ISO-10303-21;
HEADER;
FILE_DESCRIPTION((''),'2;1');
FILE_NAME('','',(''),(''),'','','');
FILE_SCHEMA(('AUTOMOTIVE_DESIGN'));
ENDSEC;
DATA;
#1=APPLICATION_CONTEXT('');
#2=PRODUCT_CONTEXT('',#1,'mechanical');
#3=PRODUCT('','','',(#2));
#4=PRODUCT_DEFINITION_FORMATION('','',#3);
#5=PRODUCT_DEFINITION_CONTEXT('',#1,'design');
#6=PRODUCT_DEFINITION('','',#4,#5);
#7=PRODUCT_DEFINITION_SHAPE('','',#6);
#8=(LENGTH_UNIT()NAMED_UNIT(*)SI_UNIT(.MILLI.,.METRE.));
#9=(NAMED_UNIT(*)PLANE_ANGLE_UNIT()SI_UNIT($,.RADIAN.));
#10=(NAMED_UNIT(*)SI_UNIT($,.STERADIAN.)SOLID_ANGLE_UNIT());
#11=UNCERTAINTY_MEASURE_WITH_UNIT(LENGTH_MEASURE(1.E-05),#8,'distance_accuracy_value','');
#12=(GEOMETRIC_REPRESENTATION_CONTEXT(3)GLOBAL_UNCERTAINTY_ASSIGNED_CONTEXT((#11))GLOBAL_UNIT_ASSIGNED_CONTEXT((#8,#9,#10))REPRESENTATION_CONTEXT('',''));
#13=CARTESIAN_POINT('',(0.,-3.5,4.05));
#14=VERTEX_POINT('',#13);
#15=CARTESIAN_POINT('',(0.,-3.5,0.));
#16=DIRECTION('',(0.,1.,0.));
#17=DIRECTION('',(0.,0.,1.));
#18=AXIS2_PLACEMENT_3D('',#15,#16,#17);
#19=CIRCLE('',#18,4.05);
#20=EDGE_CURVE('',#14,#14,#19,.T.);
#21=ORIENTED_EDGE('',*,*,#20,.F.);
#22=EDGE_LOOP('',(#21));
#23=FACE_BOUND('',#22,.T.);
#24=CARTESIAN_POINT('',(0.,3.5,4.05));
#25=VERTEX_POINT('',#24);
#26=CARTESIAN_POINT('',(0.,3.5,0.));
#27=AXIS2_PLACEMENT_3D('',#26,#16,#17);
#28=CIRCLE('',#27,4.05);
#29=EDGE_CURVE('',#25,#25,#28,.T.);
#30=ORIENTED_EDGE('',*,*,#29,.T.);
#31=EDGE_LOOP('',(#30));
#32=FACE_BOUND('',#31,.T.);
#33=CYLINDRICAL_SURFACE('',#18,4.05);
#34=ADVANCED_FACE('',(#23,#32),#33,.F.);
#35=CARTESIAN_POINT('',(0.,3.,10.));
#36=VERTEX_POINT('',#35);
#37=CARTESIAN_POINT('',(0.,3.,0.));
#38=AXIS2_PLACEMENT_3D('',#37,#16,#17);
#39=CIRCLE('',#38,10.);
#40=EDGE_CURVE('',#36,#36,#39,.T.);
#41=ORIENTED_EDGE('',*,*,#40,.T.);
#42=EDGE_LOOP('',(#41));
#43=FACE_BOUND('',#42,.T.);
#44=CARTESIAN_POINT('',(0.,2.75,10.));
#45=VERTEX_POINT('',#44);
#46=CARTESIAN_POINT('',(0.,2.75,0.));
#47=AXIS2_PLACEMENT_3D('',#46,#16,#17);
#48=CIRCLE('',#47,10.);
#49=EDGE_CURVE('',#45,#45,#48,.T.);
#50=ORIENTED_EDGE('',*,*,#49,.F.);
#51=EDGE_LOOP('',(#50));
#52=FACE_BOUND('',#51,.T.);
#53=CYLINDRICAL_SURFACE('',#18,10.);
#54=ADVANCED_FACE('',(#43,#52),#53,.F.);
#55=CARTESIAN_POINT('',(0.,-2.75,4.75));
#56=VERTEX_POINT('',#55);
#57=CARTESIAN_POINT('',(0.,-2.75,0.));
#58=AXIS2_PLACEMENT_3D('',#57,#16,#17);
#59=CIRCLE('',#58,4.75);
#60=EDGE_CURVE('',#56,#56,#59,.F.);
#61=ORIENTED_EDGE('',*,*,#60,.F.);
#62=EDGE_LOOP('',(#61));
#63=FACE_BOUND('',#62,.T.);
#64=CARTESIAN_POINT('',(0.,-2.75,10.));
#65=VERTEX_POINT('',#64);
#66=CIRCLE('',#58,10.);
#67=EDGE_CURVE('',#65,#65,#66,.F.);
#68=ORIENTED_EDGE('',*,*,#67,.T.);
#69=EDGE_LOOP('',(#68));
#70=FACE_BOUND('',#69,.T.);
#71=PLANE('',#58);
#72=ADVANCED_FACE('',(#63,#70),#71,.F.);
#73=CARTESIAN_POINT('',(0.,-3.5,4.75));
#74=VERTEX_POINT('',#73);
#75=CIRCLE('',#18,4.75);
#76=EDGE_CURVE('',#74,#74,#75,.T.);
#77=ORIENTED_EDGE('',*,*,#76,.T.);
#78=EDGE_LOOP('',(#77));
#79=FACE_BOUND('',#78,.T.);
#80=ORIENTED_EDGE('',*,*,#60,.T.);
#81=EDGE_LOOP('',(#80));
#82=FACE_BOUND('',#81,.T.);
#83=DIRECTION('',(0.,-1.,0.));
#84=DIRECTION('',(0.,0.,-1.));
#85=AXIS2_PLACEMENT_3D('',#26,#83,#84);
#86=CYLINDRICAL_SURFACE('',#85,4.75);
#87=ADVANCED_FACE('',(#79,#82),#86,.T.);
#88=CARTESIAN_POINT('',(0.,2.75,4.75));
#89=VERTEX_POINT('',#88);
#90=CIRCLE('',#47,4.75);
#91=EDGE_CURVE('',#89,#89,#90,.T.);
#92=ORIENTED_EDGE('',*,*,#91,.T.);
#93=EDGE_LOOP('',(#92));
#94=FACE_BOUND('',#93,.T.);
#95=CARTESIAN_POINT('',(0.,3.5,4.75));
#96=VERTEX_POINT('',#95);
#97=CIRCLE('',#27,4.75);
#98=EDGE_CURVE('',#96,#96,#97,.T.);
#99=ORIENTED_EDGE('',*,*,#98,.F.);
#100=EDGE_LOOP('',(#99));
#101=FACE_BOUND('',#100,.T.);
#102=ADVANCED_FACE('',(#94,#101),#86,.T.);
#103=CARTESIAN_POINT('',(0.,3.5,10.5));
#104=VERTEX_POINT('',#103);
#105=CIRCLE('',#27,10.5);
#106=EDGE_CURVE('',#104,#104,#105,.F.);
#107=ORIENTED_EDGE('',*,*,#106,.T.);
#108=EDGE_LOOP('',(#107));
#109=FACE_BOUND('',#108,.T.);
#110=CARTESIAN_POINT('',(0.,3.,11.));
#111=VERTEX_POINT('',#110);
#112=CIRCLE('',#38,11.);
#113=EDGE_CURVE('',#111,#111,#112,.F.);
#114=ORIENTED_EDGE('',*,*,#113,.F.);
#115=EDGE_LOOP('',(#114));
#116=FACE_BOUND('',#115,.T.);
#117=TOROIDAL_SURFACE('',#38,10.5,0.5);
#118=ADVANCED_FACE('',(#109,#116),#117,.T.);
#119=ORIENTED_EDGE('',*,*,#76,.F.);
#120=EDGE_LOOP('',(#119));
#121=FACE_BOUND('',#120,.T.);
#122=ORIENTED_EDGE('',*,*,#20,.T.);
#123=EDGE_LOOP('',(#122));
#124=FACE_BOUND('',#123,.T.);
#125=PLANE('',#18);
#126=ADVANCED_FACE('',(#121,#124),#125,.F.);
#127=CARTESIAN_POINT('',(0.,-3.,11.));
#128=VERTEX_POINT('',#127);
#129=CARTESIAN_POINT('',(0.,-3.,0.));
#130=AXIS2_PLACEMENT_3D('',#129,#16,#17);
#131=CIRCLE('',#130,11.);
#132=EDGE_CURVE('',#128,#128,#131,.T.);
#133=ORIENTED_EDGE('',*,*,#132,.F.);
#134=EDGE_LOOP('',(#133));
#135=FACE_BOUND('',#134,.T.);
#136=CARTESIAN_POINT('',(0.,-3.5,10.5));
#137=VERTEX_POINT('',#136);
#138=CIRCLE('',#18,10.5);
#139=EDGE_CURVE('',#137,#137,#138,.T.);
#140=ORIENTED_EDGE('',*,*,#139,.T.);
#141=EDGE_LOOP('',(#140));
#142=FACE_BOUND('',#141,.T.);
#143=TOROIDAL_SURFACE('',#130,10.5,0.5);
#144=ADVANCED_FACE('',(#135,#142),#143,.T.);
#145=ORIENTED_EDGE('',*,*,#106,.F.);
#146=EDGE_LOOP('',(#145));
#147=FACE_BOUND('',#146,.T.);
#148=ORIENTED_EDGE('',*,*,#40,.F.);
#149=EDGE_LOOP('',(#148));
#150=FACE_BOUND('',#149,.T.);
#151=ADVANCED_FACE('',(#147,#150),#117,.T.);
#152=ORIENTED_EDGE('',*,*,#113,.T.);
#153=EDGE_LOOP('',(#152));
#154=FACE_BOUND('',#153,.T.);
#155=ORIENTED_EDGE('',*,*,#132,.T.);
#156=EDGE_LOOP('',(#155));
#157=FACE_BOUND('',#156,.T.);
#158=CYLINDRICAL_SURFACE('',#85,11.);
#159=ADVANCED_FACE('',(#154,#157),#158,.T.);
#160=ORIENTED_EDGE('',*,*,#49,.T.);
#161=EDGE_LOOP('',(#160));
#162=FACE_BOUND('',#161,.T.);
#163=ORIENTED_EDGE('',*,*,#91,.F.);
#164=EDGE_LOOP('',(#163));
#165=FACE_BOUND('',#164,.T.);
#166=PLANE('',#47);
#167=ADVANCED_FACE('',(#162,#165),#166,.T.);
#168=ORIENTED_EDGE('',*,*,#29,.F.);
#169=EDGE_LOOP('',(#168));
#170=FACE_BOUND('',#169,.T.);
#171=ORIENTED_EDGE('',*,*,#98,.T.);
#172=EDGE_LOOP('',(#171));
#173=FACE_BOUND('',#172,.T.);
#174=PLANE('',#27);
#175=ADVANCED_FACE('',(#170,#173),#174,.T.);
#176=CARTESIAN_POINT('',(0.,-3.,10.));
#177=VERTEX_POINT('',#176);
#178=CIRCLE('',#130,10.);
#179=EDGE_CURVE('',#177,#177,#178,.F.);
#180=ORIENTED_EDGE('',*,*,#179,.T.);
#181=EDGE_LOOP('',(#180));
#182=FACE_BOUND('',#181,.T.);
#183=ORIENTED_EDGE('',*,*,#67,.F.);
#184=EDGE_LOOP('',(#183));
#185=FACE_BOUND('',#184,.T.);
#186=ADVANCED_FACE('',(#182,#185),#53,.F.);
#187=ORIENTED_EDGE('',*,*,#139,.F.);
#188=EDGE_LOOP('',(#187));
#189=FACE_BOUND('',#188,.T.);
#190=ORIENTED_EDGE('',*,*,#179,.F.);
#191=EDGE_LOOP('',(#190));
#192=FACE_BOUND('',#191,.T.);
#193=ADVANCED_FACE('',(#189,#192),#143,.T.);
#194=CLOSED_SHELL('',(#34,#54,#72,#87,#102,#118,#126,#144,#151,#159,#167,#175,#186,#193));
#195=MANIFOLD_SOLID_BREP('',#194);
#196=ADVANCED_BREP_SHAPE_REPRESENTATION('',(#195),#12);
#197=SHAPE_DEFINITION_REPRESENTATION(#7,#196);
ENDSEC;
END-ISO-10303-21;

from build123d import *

# Parameters (mm, degrees)
SKETCH1_R               = 11
BOSS_EXTRUDE1_DEPTH     = 3.5
CUT_EXTRUDE1_DEPTH      = 16.945218719
CUT_EXTRUDE1_DEPTH_BACK = 16.945218719
SKETCH2_R               = 10
SKETCH3_R               = 10
BOSS_EXTRUDE2_DEPTH     = 2.75
CUT_EXTRUDE2_DEPTH      = 16.945218719
CUT_EXTRUDE2_DEPTH_BACK = 16.945218719
SKETCH4_R               = 4.75
SKETCH5_R               = 4.75
BOSS_EXTRUDE3_DEPTH     = 3.5
CUT_EXTRUDE3_DEPTH      = 16.945218719
CUT_EXTRUDE3_DEPTH_BACK = 16.945218719
SKETCH6_R               = 4.05
FILLET1_R               = 0.5


with BuildPart() as part:
    # Sketch1 → Boss-Extrude1 (new, symmetric)
    with BuildSketch(Plane(origin=(0, 0, 0), x_dir=(1, 0, 0), z_dir=(0, 1, 0))):
        with Locations(Location((0, 0, 0), (0, 0, 270))):
            Circle(SKETCH1_R)
    extrude(amount=BOSS_EXTRUDE1_DEPTH, both=True)

    # Sketch2 → Cut-Extrude1 (cut, two sides: drawn at the far end of the back side and taken through both)
    with BuildSketch(Plane(origin=(0, 0, 0), x_dir=(1, 0, 0), z_dir=(0, 1, 0)).offset(-CUT_EXTRUDE1_DEPTH_BACK)):
        with Locations(Location((0, 0, 0), (0, 0, 270))):
            Circle(SKETCH2_R)
    extrude(amount=CUT_EXTRUDE1_DEPTH + CUT_EXTRUDE1_DEPTH_BACK, mode=Mode.SUBTRACT)

    # Sketch3 → Boss-Extrude2 (add, symmetric)
    with BuildSketch(Plane(origin=(0, 0, 0), x_dir=(1, 0, 0), z_dir=(0, 1, 0))):
        with Locations(Location((0, 0, 0), (0, 0, 270))):
            Circle(SKETCH3_R)
    extrude(amount=BOSS_EXTRUDE2_DEPTH, both=True)

    # Sketch4 → Cut-Extrude2 (cut, two sides: drawn at the far end of the back side and taken through both)
    with BuildSketch(Plane(origin=(0, 0, 0), x_dir=(1, 0, 0), z_dir=(0, 1, 0)).offset(-CUT_EXTRUDE2_DEPTH_BACK)):
        with Locations(Location((0, 0, 0), (0, 0, 270))):
            Circle(SKETCH4_R)
    extrude(amount=CUT_EXTRUDE2_DEPTH + CUT_EXTRUDE2_DEPTH_BACK, mode=Mode.SUBTRACT)

    # Sketch5 → Boss-Extrude3 (add, symmetric)
    with BuildSketch(Plane(origin=(0, 0, 0), x_dir=(1, 0, 0), z_dir=(0, 1, 0))):
        with Locations(Location((0, 0, 0), (0, 0, 270))):
            Circle(SKETCH5_R)
    extrude(amount=BOSS_EXTRUDE3_DEPTH, both=True)

    # Sketch6 → Cut-Extrude3 (cut, two sides: drawn at the far end of the back side and taken through both)
    with BuildSketch(Plane(origin=(0, 0, 0), x_dir=(1, 0, 0), z_dir=(0, 1, 0)).offset(-CUT_EXTRUDE3_DEPTH_BACK)):
        with Locations(Location((0, 0, 0), (0, 0, 270))):
            Circle(SKETCH6_R)
    extrude(amount=CUT_EXTRUDE3_DEPTH + CUT_EXTRUDE3_DEPTH_BACK, mode=Mode.SUBTRACT)

    # Fillet1
    fillet1_edges = [part.edges().sort_by_distance(p)[0] for p in [
        (0, -3.5, -11),
        (0, 3.5, -11),
        (0, -3.5, -10),
        (0, 3.5, -10),
    ]]
    fillet(fillet1_edges, radius=FILLET1_R - 0.0001)  # a hair under: the kernel refuses the full size


solid = part.part
